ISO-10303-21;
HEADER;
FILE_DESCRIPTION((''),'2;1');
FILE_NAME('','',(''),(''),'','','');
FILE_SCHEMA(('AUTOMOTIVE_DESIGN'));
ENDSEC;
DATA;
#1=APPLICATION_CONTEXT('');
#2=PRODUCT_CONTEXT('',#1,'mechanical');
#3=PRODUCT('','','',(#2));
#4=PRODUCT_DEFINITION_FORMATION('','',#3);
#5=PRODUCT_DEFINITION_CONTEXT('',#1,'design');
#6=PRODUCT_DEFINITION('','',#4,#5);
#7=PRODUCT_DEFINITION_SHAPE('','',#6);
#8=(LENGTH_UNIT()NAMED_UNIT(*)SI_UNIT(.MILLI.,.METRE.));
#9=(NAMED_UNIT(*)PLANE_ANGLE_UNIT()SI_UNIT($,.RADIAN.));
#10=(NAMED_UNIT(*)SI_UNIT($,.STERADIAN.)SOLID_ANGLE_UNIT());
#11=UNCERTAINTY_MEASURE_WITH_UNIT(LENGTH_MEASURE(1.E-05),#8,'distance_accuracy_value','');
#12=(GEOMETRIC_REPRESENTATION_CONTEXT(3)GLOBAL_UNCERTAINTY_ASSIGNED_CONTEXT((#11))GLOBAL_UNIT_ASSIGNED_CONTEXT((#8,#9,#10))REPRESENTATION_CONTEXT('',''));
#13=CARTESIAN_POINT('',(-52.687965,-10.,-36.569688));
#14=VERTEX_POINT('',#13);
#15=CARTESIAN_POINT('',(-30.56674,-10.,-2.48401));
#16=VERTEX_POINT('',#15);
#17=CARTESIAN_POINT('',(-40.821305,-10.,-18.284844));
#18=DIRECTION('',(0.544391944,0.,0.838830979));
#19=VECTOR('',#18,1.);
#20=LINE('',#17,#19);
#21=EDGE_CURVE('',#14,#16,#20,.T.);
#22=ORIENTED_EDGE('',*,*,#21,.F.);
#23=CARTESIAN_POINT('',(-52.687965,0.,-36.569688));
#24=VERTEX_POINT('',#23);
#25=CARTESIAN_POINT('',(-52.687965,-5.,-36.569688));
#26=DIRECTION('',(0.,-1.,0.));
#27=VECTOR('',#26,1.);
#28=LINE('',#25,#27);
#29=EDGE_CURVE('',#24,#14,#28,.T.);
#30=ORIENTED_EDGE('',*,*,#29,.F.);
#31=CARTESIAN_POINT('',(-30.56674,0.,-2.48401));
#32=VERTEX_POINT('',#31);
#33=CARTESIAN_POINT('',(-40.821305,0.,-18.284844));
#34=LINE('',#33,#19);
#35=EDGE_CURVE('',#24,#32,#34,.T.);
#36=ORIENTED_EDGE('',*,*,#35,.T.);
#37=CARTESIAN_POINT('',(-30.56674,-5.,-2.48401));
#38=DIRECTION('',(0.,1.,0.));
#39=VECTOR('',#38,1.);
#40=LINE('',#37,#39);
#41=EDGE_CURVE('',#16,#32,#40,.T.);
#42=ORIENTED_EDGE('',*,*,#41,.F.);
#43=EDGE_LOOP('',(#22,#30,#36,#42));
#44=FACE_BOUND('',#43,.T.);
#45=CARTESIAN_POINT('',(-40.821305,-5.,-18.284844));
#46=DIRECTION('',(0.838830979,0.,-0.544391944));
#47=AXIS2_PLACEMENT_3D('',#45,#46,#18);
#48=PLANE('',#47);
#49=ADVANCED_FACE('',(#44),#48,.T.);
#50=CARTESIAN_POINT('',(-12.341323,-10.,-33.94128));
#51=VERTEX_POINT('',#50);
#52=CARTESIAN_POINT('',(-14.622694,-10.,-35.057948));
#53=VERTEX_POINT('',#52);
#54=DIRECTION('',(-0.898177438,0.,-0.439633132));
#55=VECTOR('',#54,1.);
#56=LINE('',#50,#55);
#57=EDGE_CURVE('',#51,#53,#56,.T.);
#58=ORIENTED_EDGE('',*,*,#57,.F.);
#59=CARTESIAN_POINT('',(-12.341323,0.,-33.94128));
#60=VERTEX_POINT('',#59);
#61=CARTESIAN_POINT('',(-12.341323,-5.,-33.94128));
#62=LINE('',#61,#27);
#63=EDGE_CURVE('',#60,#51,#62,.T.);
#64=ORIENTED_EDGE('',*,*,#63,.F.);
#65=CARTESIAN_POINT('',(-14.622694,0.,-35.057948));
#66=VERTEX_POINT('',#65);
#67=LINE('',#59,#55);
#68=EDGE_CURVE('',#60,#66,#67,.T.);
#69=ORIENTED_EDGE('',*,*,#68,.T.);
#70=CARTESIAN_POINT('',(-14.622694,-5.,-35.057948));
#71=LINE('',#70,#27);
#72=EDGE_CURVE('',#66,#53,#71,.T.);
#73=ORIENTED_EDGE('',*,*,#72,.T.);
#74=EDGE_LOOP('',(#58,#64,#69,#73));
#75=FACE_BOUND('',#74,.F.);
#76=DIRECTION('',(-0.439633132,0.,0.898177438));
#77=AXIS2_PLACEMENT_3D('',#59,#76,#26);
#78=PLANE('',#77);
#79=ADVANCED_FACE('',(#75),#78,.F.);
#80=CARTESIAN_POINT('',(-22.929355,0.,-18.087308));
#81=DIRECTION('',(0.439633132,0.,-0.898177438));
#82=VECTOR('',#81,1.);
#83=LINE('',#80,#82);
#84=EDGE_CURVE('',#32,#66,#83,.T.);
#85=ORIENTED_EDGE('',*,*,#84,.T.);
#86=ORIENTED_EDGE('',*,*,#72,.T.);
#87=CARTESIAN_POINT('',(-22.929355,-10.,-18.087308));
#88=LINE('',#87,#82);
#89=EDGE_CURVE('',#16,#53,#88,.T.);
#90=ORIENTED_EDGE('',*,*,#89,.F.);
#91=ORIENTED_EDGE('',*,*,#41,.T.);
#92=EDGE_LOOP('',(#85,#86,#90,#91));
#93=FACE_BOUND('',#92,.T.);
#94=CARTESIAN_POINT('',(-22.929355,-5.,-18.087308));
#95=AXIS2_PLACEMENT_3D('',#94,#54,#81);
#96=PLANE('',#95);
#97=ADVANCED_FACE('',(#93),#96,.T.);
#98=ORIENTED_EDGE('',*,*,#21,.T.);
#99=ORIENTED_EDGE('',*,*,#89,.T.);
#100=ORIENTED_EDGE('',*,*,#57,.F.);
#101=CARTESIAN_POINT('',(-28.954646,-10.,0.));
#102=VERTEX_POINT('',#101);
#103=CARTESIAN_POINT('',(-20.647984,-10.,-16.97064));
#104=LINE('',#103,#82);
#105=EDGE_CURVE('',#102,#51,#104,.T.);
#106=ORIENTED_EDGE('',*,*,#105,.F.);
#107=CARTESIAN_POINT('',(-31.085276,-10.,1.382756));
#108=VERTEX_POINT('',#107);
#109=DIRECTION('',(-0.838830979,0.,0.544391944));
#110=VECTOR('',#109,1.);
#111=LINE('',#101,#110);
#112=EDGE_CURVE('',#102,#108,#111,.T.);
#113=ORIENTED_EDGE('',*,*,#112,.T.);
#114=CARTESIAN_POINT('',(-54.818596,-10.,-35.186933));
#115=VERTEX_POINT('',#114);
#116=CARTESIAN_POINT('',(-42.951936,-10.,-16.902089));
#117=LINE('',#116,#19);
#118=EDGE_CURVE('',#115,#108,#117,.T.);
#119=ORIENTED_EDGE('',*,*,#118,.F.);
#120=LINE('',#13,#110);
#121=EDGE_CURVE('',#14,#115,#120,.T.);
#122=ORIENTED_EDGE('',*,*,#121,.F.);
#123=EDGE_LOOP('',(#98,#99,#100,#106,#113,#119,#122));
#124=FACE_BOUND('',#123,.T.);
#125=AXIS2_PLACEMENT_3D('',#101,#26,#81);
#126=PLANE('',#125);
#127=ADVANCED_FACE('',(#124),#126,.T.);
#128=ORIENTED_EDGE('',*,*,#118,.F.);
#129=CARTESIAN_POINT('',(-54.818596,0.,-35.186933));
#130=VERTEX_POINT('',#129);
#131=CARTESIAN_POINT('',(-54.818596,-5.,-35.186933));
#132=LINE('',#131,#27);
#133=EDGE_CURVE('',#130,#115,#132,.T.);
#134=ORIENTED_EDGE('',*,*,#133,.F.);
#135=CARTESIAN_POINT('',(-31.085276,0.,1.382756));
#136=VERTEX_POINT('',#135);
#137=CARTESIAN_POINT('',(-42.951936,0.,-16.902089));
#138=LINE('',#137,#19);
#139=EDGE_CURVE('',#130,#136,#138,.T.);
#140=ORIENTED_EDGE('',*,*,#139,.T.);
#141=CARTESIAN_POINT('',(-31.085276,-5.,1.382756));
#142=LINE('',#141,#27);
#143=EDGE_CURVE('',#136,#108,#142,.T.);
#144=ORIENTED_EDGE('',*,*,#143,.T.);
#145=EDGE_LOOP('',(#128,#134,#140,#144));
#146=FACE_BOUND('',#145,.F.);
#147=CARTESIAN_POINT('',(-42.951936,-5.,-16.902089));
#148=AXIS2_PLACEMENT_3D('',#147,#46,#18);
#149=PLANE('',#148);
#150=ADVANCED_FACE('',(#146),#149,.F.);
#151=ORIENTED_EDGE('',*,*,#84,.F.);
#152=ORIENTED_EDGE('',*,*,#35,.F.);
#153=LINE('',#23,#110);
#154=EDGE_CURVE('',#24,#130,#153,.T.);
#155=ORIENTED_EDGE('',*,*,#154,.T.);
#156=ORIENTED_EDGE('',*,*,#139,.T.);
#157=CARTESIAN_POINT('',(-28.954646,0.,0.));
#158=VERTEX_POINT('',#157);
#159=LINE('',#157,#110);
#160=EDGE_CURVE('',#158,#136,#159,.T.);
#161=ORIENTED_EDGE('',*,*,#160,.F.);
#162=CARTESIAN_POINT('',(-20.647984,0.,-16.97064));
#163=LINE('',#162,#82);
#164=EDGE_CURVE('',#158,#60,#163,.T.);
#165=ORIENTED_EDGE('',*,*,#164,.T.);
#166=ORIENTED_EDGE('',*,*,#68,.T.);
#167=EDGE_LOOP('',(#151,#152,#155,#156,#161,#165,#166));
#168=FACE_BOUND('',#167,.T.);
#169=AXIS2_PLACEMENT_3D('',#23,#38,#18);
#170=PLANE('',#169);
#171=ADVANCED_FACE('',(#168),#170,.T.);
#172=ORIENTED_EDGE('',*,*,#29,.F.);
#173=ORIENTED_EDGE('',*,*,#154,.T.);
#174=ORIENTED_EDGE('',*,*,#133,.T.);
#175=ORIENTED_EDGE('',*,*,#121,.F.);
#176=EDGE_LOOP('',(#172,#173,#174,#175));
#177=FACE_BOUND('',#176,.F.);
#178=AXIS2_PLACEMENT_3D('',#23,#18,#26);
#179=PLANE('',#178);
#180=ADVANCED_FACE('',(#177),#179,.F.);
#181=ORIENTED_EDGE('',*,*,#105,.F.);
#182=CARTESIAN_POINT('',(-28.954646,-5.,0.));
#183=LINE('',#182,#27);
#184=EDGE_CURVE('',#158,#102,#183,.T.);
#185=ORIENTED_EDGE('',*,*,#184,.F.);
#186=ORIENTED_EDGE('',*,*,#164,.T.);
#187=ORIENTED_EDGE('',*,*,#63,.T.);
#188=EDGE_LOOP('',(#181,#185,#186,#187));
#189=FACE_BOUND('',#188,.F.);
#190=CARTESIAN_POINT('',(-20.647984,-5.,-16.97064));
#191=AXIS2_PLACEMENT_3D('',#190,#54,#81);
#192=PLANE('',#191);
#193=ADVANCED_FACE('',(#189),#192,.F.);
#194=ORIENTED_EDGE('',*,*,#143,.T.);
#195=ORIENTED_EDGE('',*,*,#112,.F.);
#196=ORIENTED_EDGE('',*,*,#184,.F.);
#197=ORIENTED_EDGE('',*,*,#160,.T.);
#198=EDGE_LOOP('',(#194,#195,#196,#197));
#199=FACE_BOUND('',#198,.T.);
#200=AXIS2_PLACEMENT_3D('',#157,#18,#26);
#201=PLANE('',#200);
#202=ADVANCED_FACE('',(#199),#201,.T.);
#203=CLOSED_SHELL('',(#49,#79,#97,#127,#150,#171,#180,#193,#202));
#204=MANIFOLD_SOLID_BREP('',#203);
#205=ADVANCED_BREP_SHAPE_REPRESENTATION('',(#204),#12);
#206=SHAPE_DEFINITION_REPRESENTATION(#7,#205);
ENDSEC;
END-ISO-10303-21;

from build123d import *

# Parameters (mm, degrees)
F1_E0_W  = 43.5960156369
F1_E0_H  = 10
F2_DEPTH = 2.54
F1_E1_W  = 37.7890589032
F1_E1_H  = 10
F3_DEPTH = 2.54


with BuildPart() as f2:
    # F1_E0 (on explicit) → F2 (new body)
    with BuildSketch(Plane(origin=(-52.6879653335, 0, -36.5696884692), x_dir=(0.5443919443, 0, 0.8388309788), z_dir=(0.8388309788, 0, -0.5443919443))):
        with Locations((21.7980078184, 5)):
            Rectangle(F1_E0_W, F1_E0_H)
    extrude(amount=-F2_DEPTH)

    # F1_E1 (on explicit) → F3 (join)
    with BuildSketch(Plane(origin=(-28.9546456188, 0, 0), x_dir=(0.4396331317, 0, -0.8981774376), z_dir=(-0.8981774376, 0, -0.4396331317))):
        with Locations((18.8945294516, 5)):
            Rectangle(F1_E1_W, F1_E1_H)
    extrude(amount=F3_DEPTH)


solid = f2.part
